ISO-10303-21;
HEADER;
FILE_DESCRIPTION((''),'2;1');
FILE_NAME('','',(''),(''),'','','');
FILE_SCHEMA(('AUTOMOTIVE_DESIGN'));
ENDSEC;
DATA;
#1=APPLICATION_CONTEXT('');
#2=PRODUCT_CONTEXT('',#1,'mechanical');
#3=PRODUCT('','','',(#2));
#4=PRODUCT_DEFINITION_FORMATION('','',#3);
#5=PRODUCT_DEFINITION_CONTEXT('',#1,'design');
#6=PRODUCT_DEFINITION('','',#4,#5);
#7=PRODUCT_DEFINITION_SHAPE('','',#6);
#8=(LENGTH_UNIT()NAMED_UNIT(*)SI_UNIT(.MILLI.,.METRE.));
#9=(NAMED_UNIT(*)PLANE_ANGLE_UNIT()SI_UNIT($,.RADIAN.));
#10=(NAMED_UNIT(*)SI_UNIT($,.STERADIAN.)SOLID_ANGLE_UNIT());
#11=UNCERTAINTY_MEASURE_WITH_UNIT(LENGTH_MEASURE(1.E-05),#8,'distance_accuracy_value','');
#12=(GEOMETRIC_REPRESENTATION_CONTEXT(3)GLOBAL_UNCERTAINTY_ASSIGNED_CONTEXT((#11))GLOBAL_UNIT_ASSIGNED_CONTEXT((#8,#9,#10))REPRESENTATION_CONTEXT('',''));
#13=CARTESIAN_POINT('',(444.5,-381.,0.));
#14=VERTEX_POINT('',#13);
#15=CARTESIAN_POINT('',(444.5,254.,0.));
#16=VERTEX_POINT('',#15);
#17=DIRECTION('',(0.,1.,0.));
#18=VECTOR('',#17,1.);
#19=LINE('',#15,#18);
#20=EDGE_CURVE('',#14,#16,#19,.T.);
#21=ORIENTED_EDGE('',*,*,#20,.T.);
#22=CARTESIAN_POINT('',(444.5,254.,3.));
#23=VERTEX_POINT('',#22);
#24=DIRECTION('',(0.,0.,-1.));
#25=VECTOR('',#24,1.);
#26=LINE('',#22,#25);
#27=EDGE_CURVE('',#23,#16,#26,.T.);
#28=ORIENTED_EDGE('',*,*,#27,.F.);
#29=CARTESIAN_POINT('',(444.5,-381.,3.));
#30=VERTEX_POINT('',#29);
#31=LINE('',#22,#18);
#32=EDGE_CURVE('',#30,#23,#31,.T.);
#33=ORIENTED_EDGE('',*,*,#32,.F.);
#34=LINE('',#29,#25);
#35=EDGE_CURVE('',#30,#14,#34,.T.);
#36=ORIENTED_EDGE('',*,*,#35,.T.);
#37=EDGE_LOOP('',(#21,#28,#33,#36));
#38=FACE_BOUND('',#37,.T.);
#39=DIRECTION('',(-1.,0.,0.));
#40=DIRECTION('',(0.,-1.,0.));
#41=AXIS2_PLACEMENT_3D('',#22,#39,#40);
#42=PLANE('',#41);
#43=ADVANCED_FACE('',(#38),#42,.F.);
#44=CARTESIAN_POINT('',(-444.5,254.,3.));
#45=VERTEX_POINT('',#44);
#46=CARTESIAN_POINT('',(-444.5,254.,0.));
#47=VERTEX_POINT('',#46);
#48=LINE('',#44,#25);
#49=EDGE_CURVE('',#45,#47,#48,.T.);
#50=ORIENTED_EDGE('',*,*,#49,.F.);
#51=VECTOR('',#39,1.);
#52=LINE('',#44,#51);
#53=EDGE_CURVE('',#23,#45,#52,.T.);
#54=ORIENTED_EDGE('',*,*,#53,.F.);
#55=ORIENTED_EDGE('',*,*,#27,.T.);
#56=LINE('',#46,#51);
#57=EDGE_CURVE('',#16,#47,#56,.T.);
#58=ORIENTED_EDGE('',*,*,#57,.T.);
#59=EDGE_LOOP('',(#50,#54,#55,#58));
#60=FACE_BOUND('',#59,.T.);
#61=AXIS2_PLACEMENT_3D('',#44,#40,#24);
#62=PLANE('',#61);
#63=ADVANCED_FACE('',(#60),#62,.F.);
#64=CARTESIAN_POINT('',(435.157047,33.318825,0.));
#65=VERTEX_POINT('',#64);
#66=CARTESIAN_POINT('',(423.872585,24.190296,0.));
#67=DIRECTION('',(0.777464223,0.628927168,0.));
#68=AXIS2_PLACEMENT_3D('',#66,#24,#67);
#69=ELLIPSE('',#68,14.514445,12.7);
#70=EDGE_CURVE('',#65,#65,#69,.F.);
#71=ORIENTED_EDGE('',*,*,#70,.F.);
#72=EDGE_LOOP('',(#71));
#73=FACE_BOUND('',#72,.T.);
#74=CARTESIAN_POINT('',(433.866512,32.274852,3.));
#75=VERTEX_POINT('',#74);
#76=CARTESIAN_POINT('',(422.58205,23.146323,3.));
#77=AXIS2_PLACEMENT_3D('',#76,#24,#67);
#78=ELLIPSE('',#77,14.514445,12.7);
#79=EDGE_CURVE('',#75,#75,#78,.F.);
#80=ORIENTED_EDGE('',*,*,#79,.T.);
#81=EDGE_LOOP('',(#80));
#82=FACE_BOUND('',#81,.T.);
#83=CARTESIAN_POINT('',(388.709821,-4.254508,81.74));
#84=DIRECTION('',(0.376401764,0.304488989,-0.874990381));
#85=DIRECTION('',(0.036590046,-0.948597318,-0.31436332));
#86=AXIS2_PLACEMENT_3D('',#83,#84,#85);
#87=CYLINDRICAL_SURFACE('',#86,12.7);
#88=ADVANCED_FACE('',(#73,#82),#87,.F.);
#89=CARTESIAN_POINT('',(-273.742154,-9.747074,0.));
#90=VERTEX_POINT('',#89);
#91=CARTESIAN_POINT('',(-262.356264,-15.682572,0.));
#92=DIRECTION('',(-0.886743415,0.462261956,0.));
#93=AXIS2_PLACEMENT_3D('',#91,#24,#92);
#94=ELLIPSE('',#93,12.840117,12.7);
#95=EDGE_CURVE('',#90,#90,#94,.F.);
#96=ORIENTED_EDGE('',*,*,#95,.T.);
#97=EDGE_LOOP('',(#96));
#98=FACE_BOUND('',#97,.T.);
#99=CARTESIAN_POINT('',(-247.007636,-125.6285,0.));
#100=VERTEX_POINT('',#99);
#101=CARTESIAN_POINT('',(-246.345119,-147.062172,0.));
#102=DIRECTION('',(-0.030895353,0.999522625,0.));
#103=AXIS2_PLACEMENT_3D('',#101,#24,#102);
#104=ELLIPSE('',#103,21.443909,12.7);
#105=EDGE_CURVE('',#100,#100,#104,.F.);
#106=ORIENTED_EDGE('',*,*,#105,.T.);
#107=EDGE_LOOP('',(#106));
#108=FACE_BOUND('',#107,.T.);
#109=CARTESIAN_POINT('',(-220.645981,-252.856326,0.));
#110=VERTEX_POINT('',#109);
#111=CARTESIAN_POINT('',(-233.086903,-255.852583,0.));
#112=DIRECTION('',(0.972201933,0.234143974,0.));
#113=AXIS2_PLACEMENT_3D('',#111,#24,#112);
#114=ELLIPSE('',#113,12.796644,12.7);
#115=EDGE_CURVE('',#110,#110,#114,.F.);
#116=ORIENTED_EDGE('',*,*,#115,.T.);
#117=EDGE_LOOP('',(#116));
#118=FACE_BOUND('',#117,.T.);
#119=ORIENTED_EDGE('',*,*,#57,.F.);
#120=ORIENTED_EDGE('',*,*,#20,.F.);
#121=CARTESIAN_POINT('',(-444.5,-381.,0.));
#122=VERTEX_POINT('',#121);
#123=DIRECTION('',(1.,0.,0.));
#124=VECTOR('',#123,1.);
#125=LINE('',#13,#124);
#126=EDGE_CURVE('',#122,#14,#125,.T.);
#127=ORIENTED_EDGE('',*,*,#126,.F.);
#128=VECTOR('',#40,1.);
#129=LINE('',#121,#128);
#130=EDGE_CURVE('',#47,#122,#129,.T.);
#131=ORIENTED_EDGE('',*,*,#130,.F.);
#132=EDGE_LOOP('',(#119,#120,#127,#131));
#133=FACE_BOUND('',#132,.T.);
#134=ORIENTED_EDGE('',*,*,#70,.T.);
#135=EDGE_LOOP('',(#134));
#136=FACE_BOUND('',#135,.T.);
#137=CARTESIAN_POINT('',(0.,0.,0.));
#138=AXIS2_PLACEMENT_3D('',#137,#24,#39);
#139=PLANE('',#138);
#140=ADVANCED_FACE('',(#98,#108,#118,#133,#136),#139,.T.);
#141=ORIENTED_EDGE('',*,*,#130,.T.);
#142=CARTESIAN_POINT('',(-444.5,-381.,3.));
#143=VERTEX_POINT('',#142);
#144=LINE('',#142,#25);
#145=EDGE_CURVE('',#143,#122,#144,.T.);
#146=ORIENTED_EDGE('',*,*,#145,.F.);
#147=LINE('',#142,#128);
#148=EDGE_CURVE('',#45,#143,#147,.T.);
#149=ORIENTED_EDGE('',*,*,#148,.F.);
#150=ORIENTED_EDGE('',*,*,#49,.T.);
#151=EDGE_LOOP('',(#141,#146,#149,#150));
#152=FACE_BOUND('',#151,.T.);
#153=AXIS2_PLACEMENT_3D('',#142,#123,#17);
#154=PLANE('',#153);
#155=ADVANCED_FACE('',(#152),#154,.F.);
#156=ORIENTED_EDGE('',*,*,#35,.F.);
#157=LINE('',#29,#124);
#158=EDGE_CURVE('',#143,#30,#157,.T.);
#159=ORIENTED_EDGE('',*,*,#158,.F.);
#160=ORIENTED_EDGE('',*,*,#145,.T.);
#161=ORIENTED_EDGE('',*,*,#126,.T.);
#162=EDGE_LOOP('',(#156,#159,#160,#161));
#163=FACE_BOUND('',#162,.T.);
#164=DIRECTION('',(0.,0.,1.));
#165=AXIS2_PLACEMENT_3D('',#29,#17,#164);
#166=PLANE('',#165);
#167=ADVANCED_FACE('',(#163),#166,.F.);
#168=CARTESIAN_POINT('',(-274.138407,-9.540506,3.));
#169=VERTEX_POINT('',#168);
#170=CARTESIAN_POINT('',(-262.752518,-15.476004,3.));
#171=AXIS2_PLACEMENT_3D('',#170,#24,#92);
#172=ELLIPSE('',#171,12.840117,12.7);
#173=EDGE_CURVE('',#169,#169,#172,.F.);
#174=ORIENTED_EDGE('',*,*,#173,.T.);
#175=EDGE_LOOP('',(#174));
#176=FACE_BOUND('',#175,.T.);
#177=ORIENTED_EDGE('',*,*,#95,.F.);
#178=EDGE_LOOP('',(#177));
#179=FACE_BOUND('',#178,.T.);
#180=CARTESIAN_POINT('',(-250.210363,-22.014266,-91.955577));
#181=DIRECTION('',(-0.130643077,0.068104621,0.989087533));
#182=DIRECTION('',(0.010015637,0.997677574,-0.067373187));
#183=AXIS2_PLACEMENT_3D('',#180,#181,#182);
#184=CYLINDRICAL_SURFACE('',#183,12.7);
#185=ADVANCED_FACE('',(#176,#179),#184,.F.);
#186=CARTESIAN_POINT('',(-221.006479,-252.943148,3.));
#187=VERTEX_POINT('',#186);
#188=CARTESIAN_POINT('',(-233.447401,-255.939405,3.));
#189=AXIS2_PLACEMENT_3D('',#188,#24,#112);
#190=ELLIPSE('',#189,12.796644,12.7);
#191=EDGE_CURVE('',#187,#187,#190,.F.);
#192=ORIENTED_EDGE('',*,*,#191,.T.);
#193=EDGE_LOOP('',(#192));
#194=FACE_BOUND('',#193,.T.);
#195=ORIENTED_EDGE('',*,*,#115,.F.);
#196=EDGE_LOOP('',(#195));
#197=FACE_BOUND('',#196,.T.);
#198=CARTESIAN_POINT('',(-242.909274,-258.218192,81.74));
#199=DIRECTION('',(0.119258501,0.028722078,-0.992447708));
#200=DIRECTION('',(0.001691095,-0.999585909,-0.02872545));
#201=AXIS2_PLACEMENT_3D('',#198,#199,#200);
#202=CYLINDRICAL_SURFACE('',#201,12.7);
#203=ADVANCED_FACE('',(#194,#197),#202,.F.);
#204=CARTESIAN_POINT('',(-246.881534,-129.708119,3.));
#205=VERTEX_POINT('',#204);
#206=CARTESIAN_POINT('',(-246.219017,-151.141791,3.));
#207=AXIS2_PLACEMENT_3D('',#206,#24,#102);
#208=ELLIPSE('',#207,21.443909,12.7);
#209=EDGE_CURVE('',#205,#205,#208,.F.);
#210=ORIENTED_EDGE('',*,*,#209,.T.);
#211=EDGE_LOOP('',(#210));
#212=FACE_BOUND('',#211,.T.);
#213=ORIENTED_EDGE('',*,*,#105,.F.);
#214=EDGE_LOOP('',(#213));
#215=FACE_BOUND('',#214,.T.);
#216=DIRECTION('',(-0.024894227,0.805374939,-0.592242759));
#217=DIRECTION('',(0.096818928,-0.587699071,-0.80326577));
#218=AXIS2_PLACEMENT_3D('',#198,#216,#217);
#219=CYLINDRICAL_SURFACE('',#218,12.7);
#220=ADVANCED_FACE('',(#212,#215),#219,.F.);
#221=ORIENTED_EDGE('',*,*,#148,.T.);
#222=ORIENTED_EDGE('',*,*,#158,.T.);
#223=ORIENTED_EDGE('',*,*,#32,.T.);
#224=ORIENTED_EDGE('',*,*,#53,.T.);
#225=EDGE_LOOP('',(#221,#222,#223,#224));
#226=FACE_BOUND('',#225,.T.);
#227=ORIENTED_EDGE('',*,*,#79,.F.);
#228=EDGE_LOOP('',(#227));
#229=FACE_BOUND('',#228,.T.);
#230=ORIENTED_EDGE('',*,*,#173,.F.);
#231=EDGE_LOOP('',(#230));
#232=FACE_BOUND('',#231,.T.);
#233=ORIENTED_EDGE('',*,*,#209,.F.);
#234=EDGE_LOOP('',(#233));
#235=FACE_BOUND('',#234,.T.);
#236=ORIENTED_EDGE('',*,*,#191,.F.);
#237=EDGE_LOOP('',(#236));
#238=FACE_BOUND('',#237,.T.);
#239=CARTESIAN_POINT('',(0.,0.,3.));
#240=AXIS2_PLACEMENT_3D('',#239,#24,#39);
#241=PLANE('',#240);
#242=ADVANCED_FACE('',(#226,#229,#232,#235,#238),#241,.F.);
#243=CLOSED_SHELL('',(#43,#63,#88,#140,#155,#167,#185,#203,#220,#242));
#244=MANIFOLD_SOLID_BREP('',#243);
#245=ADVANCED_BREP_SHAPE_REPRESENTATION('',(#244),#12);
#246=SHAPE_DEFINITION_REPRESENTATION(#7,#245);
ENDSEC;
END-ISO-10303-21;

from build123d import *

# Parameters (mm, degrees)
SKETCH1_W           = 889
SKETCH1_H           = 635
BOSS_EXTRUDE1_DEPTH = 3
CAVITY1_START       = -39.73878613
CAVITY1_OUTLINE_R   = 12.7
CAVITY1_DEPTH       = 6.162318367
CAVITY1_START_2     = 95.028980994
CAVITY1_2_OUTLINE_R = 12.7
CAVITY1_2_DEPTH     = 39.622761672
CAVITY1_START_3     = -38.131795138
CAVITY1_3_OUTLINE_R = 12.7
CAVITY1_3_DEPTH     = 6.816543719
CAVITY1_START_4     = 156.456430578
CAVITY1_4_OUTLINE_R = 12.7
CAVITY1_4_DEPTH     = 17.482665183


# Read off the part's stored shape, not the designer's step: Cavity1
with BuildPart() as part:
    # Sketch1 → Boss-Extrude1 (new body)
    with BuildSketch(Plane.XY):
        with Locations((0, -63.5)):
            Rectangle(SKETCH1_W, SKETCH1_H)
    extrude(amount=BOSS_EXTRUDE1_DEPTH)

    # Cavity1 outline → Cavity1 (cut)
    with BuildSketch(Plane(origin=(0, 0, 0), x_dir=(0.9928632383141258, -0.0034499735487700917, 0.1192085889812489), z_dir=(0.11925850076362501, 0.028722077569289003, -0.9924477075673641)).offset(CAVITY1_START)):
        with Locations((-230.540732361, 255.745504345)):
            Circle(CAVITY1_OUTLINE_R)
    extrude(amount=CAVITY1_DEPTH, mode=Mode.SUBTRACT)

    # Cavity1 2 outline → Cavity1 2 (cut)
    with BuildSketch(Plane(origin=(0, 0, 0), x_dir=(0.9996900907049888, 0.020055402042160962, -0.014747996310634162), z_dir=(0.024894227167180604, -0.8053749390173811, 0.5922427585513381)).offset(CAVITY1_START_2)):
        with Locations((-249.218164977, -87.123506937)):
            Circle(CAVITY1_2_OUTLINE_R)
    extrude(amount=CAVITY1_2_DEPTH, mode=Mode.SUBTRACT)

    # Cavity1 3 outline → Cavity1 3 (cut)
    with BuildSketch(Plane(origin=(0, 0, 0), x_dir=(0.991429466218815, 0.00897431187314574, 0.13033447448575944), z_dir=(0.1306430767896851, -0.06810462099264145, -0.9890875325704865)).offset(CAVITY1_START_3)):
        with Locations((-260.24847135, 15.645526602)):
            Circle(CAVITY1_3_OUTLINE_R)
    extrude(amount=CAVITY1_3_DEPTH, mode=Mode.SUBTRACT)

    # Cavity1 4 outline → Cavity1 4 (cut)
    with BuildSketch(Plane(origin=(0, 0, 0), x_dir=(0.9264565352650909, -0.12370811638942411, 0.3554920395789254), z_dir=(0.3764017644281221, 0.30448898949357206, -0.8749903810971752)).offset(CAVITY1_START_4)):
        with Locations((389.706990351, -22.846486416)):
            Circle(CAVITY1_4_OUTLINE_R)
    extrude(amount=CAVITY1_4_DEPTH, mode=Mode.SUBTRACT)


solid = part.part
